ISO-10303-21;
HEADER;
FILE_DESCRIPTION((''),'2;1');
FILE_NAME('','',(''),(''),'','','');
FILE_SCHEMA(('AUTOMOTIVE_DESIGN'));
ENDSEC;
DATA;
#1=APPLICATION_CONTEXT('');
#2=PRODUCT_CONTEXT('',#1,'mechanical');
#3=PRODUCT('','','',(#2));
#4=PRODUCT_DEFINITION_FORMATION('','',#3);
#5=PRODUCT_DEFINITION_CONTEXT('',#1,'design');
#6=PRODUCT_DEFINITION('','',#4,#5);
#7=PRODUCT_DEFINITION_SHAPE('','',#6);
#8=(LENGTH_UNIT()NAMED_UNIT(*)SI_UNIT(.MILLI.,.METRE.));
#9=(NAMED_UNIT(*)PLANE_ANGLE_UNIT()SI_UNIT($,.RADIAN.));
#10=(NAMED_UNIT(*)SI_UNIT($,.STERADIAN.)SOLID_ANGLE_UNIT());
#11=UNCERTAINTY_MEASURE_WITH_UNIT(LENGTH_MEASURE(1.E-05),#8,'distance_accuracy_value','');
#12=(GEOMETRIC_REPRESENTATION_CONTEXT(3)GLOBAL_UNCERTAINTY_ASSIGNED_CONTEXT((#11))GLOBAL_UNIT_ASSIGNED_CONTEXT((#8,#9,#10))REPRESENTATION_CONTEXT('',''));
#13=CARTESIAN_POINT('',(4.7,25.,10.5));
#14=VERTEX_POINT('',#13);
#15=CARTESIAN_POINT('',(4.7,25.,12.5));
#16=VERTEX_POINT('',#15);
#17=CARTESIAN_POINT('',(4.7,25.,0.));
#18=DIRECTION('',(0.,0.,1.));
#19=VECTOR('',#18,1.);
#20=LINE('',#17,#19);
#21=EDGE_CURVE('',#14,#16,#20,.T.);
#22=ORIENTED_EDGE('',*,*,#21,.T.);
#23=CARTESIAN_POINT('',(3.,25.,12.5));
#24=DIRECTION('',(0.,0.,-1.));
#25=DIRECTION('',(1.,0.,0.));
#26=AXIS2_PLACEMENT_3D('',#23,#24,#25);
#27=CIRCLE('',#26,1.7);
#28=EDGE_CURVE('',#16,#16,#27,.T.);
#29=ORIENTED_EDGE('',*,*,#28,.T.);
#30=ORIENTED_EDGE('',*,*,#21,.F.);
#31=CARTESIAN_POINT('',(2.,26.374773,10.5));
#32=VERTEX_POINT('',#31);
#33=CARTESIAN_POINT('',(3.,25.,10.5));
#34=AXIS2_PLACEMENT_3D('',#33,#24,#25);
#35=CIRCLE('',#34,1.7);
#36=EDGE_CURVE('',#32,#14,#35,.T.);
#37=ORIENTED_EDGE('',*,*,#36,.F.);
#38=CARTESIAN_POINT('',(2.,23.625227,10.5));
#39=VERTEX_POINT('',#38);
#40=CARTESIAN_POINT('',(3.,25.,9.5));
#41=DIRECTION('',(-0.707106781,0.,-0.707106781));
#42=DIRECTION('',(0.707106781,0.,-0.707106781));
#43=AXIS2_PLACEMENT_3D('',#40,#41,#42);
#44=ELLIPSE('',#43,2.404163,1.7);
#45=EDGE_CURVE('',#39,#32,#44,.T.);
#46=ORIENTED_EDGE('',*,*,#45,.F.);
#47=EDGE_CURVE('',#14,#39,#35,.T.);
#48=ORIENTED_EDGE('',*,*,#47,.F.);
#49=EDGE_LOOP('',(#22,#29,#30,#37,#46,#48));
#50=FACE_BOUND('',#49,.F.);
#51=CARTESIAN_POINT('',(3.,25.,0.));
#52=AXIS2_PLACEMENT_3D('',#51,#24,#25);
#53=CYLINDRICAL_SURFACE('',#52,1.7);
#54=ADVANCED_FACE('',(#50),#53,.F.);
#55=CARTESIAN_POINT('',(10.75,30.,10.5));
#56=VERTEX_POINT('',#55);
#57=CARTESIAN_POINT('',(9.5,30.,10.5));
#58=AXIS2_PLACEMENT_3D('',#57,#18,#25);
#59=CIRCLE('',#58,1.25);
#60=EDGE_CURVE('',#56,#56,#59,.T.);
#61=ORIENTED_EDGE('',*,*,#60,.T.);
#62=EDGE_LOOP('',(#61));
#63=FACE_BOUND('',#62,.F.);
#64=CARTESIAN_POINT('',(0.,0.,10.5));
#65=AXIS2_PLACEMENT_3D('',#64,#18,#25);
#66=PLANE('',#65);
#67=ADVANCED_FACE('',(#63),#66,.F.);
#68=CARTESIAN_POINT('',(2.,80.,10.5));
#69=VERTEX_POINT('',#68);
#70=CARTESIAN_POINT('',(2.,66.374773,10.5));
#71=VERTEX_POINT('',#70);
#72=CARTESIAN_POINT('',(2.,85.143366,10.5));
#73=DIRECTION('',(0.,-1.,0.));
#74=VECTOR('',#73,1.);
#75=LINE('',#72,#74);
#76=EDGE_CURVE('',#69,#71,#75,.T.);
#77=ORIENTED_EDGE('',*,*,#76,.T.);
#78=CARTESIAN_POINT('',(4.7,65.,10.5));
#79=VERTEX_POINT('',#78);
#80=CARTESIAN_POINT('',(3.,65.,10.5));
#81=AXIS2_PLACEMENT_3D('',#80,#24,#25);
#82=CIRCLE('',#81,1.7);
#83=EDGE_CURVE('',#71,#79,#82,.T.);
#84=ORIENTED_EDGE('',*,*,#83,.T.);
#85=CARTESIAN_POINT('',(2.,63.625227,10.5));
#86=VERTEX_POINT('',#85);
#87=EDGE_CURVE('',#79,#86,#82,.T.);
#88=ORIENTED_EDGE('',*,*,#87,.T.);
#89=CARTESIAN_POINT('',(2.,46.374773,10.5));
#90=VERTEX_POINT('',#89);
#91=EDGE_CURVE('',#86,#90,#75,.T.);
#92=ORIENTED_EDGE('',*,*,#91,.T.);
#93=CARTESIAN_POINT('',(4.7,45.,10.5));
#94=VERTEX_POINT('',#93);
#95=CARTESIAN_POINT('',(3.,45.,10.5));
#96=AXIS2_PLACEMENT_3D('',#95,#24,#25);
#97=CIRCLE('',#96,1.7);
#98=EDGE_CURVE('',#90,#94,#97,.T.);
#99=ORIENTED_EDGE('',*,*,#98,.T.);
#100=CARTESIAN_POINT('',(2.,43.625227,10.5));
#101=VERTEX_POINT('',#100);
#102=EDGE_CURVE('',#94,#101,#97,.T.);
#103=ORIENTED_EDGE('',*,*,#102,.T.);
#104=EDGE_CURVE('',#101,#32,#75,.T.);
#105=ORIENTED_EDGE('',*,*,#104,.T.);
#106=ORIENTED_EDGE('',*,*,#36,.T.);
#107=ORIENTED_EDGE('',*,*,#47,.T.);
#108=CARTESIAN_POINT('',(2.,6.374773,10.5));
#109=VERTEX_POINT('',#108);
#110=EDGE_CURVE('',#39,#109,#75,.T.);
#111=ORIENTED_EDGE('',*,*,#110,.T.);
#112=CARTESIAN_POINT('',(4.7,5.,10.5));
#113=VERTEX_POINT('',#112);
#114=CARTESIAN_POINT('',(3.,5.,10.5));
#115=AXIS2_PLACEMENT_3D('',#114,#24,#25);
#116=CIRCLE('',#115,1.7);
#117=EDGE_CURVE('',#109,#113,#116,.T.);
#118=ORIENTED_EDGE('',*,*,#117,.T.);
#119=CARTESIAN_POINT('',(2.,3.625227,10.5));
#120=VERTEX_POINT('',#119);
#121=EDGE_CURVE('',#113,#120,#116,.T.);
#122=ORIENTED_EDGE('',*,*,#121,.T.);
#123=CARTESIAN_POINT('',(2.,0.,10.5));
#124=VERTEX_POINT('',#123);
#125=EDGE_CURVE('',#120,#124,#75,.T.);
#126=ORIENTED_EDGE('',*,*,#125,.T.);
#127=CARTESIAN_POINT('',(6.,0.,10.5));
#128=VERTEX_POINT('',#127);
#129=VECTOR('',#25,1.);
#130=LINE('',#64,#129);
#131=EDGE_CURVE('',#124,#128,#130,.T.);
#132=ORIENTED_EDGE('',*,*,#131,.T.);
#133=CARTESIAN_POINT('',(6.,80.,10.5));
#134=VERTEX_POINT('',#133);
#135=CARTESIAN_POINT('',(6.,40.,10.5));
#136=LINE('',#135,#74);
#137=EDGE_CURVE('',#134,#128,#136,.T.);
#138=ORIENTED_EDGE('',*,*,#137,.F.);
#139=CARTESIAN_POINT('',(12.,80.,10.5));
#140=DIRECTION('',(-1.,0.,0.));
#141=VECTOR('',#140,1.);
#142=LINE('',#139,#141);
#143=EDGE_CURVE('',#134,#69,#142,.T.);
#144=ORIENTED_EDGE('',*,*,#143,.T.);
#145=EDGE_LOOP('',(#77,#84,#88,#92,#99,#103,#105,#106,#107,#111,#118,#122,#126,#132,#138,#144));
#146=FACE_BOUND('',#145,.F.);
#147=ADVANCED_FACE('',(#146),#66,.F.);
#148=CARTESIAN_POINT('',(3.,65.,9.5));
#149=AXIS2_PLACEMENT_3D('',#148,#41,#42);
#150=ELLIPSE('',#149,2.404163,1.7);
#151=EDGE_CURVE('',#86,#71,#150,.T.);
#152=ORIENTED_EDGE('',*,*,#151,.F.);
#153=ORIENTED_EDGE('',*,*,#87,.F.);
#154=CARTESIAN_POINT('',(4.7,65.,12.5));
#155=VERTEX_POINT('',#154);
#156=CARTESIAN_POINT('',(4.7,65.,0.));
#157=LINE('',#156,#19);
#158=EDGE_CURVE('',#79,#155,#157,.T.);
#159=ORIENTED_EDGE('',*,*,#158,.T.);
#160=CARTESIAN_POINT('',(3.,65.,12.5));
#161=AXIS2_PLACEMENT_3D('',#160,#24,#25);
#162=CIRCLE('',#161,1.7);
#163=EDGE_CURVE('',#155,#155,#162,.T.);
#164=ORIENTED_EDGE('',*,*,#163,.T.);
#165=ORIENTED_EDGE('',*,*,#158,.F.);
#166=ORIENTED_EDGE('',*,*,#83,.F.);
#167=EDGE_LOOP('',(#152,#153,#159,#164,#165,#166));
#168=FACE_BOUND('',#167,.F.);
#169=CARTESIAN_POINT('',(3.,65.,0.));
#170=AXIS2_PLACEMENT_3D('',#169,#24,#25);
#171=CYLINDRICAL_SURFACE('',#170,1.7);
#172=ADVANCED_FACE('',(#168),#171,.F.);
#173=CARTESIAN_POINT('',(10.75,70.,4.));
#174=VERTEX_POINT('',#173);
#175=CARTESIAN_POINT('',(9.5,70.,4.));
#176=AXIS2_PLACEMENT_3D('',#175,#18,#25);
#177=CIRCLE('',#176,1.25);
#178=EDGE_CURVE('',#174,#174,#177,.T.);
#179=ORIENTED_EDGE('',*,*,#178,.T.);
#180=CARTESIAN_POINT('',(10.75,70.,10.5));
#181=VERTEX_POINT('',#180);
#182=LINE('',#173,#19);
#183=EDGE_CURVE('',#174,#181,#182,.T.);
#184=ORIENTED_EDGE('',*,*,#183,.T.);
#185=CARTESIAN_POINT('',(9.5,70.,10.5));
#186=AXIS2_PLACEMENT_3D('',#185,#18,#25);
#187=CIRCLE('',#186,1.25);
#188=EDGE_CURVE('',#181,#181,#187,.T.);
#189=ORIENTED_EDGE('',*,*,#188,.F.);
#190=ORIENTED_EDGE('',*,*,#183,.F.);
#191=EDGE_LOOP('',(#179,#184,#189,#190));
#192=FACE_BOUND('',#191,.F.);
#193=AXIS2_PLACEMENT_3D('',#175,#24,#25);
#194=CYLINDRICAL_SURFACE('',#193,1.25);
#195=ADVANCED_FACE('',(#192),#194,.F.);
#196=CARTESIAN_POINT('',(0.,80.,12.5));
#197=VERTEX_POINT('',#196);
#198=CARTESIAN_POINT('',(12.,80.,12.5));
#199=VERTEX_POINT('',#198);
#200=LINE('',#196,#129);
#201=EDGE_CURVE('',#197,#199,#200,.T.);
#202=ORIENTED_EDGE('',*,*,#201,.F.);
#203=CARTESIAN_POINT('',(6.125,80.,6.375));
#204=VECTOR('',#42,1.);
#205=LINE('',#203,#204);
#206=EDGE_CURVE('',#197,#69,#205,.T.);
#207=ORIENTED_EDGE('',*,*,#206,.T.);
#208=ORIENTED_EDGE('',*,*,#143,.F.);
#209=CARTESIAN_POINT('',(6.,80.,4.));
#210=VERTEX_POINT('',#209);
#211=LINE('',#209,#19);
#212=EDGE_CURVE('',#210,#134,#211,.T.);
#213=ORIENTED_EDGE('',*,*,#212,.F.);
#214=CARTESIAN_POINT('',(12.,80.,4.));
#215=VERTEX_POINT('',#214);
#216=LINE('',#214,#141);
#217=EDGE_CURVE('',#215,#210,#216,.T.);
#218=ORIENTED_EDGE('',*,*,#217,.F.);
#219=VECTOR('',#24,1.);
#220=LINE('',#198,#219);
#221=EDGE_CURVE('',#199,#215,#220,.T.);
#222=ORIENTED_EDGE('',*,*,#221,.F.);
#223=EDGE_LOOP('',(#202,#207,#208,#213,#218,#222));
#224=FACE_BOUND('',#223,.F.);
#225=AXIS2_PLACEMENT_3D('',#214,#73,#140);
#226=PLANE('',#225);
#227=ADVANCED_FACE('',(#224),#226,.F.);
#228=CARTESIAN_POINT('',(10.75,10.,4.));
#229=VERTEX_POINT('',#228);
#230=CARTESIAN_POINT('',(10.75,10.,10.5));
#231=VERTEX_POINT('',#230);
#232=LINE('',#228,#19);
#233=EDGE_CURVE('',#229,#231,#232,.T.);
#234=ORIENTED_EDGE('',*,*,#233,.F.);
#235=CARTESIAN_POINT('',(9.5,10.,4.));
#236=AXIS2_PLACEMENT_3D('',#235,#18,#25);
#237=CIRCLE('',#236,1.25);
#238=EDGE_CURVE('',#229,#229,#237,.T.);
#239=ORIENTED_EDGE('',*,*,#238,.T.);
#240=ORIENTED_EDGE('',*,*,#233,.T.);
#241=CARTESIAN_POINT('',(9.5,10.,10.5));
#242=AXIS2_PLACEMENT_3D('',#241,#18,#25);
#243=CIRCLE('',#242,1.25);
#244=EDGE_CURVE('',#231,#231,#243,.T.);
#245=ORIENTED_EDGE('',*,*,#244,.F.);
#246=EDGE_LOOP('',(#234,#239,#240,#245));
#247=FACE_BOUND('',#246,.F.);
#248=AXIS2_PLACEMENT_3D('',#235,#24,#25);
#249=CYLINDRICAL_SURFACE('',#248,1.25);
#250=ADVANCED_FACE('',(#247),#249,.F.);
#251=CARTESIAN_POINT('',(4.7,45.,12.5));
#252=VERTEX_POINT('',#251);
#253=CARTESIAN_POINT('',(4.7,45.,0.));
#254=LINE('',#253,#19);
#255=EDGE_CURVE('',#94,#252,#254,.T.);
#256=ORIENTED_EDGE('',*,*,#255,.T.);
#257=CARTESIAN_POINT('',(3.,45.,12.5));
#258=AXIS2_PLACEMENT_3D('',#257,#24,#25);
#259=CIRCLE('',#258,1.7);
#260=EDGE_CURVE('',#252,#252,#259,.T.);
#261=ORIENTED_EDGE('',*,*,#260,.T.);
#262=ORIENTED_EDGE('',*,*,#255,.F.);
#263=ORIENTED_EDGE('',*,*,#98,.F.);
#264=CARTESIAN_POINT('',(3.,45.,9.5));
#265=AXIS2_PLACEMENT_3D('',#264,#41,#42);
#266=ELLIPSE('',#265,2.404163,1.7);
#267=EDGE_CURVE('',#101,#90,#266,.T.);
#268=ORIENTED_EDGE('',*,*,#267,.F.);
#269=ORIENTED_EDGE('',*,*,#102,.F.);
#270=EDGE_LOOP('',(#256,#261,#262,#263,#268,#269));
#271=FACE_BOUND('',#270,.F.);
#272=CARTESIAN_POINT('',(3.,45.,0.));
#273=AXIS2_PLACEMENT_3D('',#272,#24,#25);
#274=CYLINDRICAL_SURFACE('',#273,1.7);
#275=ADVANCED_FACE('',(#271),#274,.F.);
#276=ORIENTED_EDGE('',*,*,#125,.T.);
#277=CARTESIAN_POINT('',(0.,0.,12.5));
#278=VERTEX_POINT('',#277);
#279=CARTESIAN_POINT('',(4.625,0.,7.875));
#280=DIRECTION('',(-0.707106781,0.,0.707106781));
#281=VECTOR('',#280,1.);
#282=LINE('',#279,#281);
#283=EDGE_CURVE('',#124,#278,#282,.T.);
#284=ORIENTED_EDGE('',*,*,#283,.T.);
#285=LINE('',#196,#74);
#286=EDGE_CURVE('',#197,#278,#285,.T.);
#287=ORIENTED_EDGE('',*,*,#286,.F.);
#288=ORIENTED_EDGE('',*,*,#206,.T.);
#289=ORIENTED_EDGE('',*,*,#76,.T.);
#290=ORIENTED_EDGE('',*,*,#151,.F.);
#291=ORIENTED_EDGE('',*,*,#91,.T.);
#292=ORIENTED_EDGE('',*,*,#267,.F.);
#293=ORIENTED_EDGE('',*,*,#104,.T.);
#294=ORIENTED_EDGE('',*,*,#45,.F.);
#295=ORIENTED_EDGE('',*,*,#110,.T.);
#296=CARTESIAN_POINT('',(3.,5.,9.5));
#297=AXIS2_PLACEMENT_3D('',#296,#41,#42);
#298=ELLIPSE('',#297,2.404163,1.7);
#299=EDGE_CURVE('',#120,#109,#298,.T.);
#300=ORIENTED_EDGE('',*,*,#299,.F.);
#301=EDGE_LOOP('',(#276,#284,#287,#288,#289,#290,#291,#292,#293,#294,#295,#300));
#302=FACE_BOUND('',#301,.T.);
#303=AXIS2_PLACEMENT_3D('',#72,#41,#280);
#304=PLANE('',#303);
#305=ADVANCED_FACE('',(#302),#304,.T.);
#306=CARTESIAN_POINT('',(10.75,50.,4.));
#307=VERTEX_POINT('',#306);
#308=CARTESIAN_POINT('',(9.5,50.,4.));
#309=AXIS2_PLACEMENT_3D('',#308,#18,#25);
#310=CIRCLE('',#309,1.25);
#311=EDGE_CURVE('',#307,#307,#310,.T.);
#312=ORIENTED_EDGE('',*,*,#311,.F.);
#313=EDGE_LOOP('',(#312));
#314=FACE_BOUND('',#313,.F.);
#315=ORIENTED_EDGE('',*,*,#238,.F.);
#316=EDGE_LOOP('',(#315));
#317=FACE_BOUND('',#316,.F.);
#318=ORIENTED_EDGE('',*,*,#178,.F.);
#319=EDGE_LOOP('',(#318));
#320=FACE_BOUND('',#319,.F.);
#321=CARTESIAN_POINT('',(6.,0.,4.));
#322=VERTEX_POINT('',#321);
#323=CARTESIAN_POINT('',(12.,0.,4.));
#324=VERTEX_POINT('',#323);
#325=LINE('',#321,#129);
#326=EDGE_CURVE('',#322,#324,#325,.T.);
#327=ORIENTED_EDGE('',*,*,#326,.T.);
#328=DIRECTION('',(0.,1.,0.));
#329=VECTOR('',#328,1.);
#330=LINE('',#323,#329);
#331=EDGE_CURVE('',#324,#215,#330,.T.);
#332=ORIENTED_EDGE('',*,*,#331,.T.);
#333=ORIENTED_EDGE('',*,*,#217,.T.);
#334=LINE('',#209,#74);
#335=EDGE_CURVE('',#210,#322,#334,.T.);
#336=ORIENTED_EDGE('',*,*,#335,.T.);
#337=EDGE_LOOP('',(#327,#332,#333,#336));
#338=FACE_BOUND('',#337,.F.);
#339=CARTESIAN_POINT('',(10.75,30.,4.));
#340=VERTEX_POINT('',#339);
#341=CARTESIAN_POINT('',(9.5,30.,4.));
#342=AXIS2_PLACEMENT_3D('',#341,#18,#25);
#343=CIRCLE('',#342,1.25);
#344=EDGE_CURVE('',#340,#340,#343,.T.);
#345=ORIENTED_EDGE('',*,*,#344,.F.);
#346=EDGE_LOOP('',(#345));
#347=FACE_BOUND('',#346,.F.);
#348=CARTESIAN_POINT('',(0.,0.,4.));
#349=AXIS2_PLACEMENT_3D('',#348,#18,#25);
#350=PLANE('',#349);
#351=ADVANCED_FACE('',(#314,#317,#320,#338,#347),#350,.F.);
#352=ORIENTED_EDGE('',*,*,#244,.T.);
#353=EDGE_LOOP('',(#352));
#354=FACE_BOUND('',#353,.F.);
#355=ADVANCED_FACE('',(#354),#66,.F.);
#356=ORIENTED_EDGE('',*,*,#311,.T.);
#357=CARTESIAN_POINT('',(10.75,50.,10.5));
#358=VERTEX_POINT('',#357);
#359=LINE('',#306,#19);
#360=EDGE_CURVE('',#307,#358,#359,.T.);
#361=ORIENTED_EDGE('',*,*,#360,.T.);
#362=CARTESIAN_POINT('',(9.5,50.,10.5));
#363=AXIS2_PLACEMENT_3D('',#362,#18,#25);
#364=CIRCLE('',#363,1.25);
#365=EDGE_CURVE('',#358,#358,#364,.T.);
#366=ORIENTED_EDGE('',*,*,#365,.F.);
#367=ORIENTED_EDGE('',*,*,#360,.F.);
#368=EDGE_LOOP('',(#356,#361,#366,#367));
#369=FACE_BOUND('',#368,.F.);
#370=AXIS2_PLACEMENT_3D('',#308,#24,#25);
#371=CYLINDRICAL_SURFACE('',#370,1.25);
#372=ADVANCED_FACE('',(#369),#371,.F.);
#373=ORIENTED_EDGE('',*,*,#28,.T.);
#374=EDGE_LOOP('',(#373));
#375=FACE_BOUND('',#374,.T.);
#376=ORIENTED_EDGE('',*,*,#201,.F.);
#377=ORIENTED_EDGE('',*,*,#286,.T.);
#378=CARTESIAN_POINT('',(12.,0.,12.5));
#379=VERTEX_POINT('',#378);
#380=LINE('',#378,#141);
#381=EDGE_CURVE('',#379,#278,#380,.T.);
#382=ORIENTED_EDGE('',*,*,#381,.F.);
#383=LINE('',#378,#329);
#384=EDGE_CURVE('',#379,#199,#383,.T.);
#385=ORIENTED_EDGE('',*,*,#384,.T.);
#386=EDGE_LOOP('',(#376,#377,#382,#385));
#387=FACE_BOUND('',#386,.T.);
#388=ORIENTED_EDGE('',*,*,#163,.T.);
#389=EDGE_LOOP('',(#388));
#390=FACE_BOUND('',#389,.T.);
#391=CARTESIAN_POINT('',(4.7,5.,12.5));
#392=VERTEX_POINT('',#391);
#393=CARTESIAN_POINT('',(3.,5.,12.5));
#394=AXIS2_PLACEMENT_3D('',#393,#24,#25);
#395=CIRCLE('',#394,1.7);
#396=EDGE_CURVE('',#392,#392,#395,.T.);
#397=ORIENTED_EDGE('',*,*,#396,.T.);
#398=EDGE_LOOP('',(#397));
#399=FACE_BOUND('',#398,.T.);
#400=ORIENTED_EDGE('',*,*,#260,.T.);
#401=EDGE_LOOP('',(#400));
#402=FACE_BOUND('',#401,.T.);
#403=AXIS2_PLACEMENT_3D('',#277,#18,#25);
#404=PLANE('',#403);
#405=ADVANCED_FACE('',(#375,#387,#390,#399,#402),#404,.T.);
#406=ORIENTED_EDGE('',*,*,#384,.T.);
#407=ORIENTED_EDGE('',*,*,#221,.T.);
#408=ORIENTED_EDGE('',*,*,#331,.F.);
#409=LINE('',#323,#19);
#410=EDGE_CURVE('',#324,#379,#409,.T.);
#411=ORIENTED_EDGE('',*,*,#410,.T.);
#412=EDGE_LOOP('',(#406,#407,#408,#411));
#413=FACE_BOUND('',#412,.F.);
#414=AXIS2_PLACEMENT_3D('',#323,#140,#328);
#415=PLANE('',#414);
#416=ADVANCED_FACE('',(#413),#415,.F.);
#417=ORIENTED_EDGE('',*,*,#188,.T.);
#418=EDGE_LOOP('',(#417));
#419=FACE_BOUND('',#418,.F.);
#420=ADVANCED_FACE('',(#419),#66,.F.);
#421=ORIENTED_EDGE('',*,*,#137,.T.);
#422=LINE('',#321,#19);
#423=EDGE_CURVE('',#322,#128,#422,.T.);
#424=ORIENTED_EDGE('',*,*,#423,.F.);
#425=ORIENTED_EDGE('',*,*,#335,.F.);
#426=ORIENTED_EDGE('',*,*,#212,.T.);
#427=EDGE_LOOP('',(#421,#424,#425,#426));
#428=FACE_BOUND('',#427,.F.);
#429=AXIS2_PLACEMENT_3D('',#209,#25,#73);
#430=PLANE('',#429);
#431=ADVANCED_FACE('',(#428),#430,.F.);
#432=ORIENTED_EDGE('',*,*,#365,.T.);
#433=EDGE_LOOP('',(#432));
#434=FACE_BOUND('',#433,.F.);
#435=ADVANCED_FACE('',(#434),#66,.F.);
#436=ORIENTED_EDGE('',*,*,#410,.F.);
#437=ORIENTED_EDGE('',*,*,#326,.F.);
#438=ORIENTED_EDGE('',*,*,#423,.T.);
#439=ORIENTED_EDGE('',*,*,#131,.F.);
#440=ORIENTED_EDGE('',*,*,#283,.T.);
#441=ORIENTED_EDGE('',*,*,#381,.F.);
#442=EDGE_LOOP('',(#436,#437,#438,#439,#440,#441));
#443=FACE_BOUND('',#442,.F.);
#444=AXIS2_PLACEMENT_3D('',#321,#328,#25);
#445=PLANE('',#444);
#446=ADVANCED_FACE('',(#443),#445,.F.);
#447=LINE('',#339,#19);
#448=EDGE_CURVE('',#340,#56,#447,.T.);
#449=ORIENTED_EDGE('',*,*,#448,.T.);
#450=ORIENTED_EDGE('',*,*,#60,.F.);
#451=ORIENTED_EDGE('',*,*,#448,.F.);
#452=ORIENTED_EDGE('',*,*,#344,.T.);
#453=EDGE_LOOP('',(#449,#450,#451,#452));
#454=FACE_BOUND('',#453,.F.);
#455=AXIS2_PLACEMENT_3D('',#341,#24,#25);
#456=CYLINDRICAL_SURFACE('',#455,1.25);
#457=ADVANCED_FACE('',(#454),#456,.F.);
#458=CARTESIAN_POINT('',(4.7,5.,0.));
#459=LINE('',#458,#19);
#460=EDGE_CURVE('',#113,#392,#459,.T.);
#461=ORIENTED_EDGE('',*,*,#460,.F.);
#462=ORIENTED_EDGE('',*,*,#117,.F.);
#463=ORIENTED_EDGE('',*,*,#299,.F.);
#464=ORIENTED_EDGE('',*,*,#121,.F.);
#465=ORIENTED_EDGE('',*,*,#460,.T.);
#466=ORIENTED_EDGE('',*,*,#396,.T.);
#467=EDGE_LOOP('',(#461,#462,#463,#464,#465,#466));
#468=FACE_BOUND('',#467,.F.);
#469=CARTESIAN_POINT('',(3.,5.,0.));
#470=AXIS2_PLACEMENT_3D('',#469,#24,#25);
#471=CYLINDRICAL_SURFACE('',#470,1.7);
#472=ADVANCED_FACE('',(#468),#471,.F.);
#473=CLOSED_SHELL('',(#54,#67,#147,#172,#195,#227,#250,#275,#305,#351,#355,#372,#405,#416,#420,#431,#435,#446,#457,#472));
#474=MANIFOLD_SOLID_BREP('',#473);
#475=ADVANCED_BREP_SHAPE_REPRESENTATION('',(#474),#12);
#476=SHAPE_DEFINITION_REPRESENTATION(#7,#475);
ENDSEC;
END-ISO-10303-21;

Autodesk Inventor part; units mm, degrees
ref_plane "Left_Connecting_Web_StartPlane" through (0, 0, 4) normal (0, 0, 1) x (1, 0, 0)
sketch "Left_Connecting_Web_Profile" plane through (0, 0, 4) normal (0, 0, 1) x (1, 0, 0)
  line L0 (6, 0) -> (12, 0)
  line L1 (12, 0) -> (12, 80)
  line L2 (12, 80) -> (6, 80)
  line L3 (6, 80) -> (6, 0)
  point P0 (0, 0)
  dimension "d1" = 6
  dimension "d2" = 6
  dimension "d3" = 80
extrude "Left_Connecting_Web" add sketch "Left_Connecting_Web_Profile" along normal blind 8.5
ref_plane "Left_Rod_Contact_Flange_StartPlane" through (0, 0, 10.5) normal (0, 0, 1) x (1, 0, 0)
sketch "Left_Rod_Contact_Flange_Profile" plane through (0, 0, 10.5) normal (0, 0, 1) x (1, 0, 0)
  line L0 (0, 0) -> (12, 0)
  line L1 (12, 0) -> (12, 80)
  line L2 (12, 80) -> (0, 80)
  line L3 (0, 80) -> (0, 0)
  dimension "d7" = 12
  dimension "d8" = 80
extrude "Left_Rod_Contact_Flange" add sketch "Left_Rod_Contact_Flange_Profile" along normal blind 2
sketch "Original_Rod_Clearance_4x_Locations" plane through (0, 0, 0) normal (0, 0, 1) x (1, 0, 0)
  circle A0 centre (3, 5) radius 1.7
  circle A1 centre (3, 25) radius 1.7
  circle A2 centre (3, 45) radius 1.7
  circle A3 centre (3, 65) radius 1.7
  point P0 (0, 0)
  dimension "d11" = 3
  dimension "d12" = 5
  dimension "d13" = 3.4
  dimension "d14" = 3
  dimension "d15" = 25
  dimension "d16" = 3.4
  dimension "d17" = 3
  dimension "d18" = 45
  dimension "d19" = 3.4
  dimension "d20" = 3
  dimension "d21" = 65
  dimension "d22" = 3.4
extrude "Original_Rod_Clearance_4x" cut sketch "Original_Rod_Clearance_4x_Locations" along normal through all
ref_plane "Work Plane3" through (0, 0, 4) normal (0, 0, 1) x (1, 0, 0)
sketch "Deck_Assembly_M3_Locations" plane through (0, 0, 4) normal (0, 0, 1) x (1, 0, 0)
  circle A0 centre (9.5, 10) radius 1.25
  circle A1 centre (9.5, 30) radius 1.25
  circle A2 centre (9.5, 50) radius 1.25
  circle A3 centre (9.5, 70) radius 1.25
  point P0 (0, 0)
  dimension "d26" = 9.5
  dimension "d27" = 10
  dimension "d28" = 2.5
  dimension "d29" = 9.5
  dimension "d30" = 30
  dimension "d31" = 2.5
  dimension "d32" = 9.5
  dimension "d33" = 50
  dimension "d34" = 2.5
  dimension "d35" = 9.5
  dimension "d36" = 70
  dimension "d37" = 2.5
extrude "Four_Blind_M3_Tap_Bores" cut sketch "Deck_Assembly_M3_Locations" along normal blind 6.5
thread "Deck_M3x0_5_6H_1" size "M3x0.5" class "6H" standard "ISO Metric profile" length 6.5
thread "Deck_M3x0_5_6H_2" size "M3x0.5" class "6H" standard "ISO Metric profile" length 6.5
thread "Deck_M3x0_5_6H_3" size "M3x0.5" class "6H" standard "ISO Metric profile" length 6.5
thread "Deck_M3x0_5_6H_4" size "M3x0.5" class "6H" standard "ISO Metric profile" length 6.5
chamfer "Outer_End_2mm_45deg" distance 2 angle 45 1 edges at (0, 40, 10.5)
equation "\"d1\" = RodWidth"
equation "\"d2\" = WebThickness"
equation "\"d3\" = ContactLength"
equation "\"d4\" = DropHeight"
equation "\"d7\" = RodWidth + WebThickness"
equation "\"d8\" = ContactLength"
equation "\"d9\" = RodFlangeThickness"
equation "\"d11\" = 0.5 * RodWidth"
equation "\"d12\" = RodHoleStart + 0 * RodScrewPitch"
equation "\"d13\" = RodClearanceDiameter"
equation "\"d14\" = 0.5 * RodWidth"
equation "\"d15\" = RodHoleStart + RodScrewPitch"
equation "\"d16\" = RodClearanceDiameter"
equation "\"d17\" = 0.5 * RodWidth"
equation "\"d18\" = RodHoleStart + 2 * RodScrewPitch"
equation "\"d19\" = RodClearanceDiameter"
equation "\"d20\" = 0.5 * RodWidth"
equation "\"d21\" = RodHoleStart + 3 * RodScrewPitch"
equation "\"d22\" = RodClearanceDiameter"
equation "\"d26\" = JoinLeftX"
equation "\"d27\" = JoinFirstY + 0 * JoinPitch"
equation "\"d28\" = TapDrillDiameter"
equation "\"d29\" = JoinLeftX"
equation "\"d30\" = JoinFirstY + JoinPitch"
equation "\"d31\" = TapDrillDiameter"
equation "\"d32\" = JoinLeftX"
equation "\"d33\" = JoinFirstY + 2 * JoinPitch"
equation "\"d34\" = TapDrillDiameter"
equation "\"d35\" = JoinLeftX"
equation "\"d36\" = JoinFirstY + 3 * JoinPitch"
equation "\"d37\" = TapDrillDiameter"
equation "\"d38\" = JoinThreadDepth"
equation "\"d40\" = JoinThreadDepth"
equation "\"d42\" = JoinThreadDepth"
equation "\"d44\" = JoinThreadDepth"
equation "\"d46\" = JoinThreadDepth"
equation "\"d48\" = OuterEndChamfer"
equation "\"d49\" = OuterEndChamfer"
equation "\"OverallWidth\" = 51"
equation "\"RodWidth\" = 6"
equation "\"ContactLength\" = 80"
equation "\"BaseThickness\" = 4"
equation "\"DropHeight\" = 8.5"
equation "\"WebThickness\" = 6"
equation "\"FingerStartX\" = 19.93338"
equation "\"FingerWidth\" = 13.5"
equation "\"FingerThickness\" = 6"
equation "\"FingerEndInset\" = 4"
equation "\"RodClearanceDiameter\" = 3.4"
equation "\"ClampFirstY\" = 41.82802"
equation "\"ClampPitch\" = 16"
equation "\"ClampHeight\" = BaseThickness + 0.5 * FingerThickness"
equation "\"TapDrillDiameter\" = 2.5"
equation "\"TapDepth\" = 6"
equation "\"RodHoleStart\" = 5"
equation "\"RodScrewPitch\" = 20"
equation "\"JoinLeftX\" = 9.5"
equation "\"JoinFirstY\" = 10"
equation "\"JoinPitch\" = 20"
equation "\"JoinThreadDepth\" = 6.5"
equation "\"JoinCountersinkDiameter\" = 6.2"
equation "\"d0\" = BaseThickness"
equation "\"d6\" = BaseThickness + DropHeight - RodFlangeThickness"
equation "\"d25\" = BaseThickness"
equation "\"RodFlangeThickness\" = 2"
equation "\"OuterEndChamfer\" = RodFlangeThickness"
properties part number "Left_Rod_Support"
